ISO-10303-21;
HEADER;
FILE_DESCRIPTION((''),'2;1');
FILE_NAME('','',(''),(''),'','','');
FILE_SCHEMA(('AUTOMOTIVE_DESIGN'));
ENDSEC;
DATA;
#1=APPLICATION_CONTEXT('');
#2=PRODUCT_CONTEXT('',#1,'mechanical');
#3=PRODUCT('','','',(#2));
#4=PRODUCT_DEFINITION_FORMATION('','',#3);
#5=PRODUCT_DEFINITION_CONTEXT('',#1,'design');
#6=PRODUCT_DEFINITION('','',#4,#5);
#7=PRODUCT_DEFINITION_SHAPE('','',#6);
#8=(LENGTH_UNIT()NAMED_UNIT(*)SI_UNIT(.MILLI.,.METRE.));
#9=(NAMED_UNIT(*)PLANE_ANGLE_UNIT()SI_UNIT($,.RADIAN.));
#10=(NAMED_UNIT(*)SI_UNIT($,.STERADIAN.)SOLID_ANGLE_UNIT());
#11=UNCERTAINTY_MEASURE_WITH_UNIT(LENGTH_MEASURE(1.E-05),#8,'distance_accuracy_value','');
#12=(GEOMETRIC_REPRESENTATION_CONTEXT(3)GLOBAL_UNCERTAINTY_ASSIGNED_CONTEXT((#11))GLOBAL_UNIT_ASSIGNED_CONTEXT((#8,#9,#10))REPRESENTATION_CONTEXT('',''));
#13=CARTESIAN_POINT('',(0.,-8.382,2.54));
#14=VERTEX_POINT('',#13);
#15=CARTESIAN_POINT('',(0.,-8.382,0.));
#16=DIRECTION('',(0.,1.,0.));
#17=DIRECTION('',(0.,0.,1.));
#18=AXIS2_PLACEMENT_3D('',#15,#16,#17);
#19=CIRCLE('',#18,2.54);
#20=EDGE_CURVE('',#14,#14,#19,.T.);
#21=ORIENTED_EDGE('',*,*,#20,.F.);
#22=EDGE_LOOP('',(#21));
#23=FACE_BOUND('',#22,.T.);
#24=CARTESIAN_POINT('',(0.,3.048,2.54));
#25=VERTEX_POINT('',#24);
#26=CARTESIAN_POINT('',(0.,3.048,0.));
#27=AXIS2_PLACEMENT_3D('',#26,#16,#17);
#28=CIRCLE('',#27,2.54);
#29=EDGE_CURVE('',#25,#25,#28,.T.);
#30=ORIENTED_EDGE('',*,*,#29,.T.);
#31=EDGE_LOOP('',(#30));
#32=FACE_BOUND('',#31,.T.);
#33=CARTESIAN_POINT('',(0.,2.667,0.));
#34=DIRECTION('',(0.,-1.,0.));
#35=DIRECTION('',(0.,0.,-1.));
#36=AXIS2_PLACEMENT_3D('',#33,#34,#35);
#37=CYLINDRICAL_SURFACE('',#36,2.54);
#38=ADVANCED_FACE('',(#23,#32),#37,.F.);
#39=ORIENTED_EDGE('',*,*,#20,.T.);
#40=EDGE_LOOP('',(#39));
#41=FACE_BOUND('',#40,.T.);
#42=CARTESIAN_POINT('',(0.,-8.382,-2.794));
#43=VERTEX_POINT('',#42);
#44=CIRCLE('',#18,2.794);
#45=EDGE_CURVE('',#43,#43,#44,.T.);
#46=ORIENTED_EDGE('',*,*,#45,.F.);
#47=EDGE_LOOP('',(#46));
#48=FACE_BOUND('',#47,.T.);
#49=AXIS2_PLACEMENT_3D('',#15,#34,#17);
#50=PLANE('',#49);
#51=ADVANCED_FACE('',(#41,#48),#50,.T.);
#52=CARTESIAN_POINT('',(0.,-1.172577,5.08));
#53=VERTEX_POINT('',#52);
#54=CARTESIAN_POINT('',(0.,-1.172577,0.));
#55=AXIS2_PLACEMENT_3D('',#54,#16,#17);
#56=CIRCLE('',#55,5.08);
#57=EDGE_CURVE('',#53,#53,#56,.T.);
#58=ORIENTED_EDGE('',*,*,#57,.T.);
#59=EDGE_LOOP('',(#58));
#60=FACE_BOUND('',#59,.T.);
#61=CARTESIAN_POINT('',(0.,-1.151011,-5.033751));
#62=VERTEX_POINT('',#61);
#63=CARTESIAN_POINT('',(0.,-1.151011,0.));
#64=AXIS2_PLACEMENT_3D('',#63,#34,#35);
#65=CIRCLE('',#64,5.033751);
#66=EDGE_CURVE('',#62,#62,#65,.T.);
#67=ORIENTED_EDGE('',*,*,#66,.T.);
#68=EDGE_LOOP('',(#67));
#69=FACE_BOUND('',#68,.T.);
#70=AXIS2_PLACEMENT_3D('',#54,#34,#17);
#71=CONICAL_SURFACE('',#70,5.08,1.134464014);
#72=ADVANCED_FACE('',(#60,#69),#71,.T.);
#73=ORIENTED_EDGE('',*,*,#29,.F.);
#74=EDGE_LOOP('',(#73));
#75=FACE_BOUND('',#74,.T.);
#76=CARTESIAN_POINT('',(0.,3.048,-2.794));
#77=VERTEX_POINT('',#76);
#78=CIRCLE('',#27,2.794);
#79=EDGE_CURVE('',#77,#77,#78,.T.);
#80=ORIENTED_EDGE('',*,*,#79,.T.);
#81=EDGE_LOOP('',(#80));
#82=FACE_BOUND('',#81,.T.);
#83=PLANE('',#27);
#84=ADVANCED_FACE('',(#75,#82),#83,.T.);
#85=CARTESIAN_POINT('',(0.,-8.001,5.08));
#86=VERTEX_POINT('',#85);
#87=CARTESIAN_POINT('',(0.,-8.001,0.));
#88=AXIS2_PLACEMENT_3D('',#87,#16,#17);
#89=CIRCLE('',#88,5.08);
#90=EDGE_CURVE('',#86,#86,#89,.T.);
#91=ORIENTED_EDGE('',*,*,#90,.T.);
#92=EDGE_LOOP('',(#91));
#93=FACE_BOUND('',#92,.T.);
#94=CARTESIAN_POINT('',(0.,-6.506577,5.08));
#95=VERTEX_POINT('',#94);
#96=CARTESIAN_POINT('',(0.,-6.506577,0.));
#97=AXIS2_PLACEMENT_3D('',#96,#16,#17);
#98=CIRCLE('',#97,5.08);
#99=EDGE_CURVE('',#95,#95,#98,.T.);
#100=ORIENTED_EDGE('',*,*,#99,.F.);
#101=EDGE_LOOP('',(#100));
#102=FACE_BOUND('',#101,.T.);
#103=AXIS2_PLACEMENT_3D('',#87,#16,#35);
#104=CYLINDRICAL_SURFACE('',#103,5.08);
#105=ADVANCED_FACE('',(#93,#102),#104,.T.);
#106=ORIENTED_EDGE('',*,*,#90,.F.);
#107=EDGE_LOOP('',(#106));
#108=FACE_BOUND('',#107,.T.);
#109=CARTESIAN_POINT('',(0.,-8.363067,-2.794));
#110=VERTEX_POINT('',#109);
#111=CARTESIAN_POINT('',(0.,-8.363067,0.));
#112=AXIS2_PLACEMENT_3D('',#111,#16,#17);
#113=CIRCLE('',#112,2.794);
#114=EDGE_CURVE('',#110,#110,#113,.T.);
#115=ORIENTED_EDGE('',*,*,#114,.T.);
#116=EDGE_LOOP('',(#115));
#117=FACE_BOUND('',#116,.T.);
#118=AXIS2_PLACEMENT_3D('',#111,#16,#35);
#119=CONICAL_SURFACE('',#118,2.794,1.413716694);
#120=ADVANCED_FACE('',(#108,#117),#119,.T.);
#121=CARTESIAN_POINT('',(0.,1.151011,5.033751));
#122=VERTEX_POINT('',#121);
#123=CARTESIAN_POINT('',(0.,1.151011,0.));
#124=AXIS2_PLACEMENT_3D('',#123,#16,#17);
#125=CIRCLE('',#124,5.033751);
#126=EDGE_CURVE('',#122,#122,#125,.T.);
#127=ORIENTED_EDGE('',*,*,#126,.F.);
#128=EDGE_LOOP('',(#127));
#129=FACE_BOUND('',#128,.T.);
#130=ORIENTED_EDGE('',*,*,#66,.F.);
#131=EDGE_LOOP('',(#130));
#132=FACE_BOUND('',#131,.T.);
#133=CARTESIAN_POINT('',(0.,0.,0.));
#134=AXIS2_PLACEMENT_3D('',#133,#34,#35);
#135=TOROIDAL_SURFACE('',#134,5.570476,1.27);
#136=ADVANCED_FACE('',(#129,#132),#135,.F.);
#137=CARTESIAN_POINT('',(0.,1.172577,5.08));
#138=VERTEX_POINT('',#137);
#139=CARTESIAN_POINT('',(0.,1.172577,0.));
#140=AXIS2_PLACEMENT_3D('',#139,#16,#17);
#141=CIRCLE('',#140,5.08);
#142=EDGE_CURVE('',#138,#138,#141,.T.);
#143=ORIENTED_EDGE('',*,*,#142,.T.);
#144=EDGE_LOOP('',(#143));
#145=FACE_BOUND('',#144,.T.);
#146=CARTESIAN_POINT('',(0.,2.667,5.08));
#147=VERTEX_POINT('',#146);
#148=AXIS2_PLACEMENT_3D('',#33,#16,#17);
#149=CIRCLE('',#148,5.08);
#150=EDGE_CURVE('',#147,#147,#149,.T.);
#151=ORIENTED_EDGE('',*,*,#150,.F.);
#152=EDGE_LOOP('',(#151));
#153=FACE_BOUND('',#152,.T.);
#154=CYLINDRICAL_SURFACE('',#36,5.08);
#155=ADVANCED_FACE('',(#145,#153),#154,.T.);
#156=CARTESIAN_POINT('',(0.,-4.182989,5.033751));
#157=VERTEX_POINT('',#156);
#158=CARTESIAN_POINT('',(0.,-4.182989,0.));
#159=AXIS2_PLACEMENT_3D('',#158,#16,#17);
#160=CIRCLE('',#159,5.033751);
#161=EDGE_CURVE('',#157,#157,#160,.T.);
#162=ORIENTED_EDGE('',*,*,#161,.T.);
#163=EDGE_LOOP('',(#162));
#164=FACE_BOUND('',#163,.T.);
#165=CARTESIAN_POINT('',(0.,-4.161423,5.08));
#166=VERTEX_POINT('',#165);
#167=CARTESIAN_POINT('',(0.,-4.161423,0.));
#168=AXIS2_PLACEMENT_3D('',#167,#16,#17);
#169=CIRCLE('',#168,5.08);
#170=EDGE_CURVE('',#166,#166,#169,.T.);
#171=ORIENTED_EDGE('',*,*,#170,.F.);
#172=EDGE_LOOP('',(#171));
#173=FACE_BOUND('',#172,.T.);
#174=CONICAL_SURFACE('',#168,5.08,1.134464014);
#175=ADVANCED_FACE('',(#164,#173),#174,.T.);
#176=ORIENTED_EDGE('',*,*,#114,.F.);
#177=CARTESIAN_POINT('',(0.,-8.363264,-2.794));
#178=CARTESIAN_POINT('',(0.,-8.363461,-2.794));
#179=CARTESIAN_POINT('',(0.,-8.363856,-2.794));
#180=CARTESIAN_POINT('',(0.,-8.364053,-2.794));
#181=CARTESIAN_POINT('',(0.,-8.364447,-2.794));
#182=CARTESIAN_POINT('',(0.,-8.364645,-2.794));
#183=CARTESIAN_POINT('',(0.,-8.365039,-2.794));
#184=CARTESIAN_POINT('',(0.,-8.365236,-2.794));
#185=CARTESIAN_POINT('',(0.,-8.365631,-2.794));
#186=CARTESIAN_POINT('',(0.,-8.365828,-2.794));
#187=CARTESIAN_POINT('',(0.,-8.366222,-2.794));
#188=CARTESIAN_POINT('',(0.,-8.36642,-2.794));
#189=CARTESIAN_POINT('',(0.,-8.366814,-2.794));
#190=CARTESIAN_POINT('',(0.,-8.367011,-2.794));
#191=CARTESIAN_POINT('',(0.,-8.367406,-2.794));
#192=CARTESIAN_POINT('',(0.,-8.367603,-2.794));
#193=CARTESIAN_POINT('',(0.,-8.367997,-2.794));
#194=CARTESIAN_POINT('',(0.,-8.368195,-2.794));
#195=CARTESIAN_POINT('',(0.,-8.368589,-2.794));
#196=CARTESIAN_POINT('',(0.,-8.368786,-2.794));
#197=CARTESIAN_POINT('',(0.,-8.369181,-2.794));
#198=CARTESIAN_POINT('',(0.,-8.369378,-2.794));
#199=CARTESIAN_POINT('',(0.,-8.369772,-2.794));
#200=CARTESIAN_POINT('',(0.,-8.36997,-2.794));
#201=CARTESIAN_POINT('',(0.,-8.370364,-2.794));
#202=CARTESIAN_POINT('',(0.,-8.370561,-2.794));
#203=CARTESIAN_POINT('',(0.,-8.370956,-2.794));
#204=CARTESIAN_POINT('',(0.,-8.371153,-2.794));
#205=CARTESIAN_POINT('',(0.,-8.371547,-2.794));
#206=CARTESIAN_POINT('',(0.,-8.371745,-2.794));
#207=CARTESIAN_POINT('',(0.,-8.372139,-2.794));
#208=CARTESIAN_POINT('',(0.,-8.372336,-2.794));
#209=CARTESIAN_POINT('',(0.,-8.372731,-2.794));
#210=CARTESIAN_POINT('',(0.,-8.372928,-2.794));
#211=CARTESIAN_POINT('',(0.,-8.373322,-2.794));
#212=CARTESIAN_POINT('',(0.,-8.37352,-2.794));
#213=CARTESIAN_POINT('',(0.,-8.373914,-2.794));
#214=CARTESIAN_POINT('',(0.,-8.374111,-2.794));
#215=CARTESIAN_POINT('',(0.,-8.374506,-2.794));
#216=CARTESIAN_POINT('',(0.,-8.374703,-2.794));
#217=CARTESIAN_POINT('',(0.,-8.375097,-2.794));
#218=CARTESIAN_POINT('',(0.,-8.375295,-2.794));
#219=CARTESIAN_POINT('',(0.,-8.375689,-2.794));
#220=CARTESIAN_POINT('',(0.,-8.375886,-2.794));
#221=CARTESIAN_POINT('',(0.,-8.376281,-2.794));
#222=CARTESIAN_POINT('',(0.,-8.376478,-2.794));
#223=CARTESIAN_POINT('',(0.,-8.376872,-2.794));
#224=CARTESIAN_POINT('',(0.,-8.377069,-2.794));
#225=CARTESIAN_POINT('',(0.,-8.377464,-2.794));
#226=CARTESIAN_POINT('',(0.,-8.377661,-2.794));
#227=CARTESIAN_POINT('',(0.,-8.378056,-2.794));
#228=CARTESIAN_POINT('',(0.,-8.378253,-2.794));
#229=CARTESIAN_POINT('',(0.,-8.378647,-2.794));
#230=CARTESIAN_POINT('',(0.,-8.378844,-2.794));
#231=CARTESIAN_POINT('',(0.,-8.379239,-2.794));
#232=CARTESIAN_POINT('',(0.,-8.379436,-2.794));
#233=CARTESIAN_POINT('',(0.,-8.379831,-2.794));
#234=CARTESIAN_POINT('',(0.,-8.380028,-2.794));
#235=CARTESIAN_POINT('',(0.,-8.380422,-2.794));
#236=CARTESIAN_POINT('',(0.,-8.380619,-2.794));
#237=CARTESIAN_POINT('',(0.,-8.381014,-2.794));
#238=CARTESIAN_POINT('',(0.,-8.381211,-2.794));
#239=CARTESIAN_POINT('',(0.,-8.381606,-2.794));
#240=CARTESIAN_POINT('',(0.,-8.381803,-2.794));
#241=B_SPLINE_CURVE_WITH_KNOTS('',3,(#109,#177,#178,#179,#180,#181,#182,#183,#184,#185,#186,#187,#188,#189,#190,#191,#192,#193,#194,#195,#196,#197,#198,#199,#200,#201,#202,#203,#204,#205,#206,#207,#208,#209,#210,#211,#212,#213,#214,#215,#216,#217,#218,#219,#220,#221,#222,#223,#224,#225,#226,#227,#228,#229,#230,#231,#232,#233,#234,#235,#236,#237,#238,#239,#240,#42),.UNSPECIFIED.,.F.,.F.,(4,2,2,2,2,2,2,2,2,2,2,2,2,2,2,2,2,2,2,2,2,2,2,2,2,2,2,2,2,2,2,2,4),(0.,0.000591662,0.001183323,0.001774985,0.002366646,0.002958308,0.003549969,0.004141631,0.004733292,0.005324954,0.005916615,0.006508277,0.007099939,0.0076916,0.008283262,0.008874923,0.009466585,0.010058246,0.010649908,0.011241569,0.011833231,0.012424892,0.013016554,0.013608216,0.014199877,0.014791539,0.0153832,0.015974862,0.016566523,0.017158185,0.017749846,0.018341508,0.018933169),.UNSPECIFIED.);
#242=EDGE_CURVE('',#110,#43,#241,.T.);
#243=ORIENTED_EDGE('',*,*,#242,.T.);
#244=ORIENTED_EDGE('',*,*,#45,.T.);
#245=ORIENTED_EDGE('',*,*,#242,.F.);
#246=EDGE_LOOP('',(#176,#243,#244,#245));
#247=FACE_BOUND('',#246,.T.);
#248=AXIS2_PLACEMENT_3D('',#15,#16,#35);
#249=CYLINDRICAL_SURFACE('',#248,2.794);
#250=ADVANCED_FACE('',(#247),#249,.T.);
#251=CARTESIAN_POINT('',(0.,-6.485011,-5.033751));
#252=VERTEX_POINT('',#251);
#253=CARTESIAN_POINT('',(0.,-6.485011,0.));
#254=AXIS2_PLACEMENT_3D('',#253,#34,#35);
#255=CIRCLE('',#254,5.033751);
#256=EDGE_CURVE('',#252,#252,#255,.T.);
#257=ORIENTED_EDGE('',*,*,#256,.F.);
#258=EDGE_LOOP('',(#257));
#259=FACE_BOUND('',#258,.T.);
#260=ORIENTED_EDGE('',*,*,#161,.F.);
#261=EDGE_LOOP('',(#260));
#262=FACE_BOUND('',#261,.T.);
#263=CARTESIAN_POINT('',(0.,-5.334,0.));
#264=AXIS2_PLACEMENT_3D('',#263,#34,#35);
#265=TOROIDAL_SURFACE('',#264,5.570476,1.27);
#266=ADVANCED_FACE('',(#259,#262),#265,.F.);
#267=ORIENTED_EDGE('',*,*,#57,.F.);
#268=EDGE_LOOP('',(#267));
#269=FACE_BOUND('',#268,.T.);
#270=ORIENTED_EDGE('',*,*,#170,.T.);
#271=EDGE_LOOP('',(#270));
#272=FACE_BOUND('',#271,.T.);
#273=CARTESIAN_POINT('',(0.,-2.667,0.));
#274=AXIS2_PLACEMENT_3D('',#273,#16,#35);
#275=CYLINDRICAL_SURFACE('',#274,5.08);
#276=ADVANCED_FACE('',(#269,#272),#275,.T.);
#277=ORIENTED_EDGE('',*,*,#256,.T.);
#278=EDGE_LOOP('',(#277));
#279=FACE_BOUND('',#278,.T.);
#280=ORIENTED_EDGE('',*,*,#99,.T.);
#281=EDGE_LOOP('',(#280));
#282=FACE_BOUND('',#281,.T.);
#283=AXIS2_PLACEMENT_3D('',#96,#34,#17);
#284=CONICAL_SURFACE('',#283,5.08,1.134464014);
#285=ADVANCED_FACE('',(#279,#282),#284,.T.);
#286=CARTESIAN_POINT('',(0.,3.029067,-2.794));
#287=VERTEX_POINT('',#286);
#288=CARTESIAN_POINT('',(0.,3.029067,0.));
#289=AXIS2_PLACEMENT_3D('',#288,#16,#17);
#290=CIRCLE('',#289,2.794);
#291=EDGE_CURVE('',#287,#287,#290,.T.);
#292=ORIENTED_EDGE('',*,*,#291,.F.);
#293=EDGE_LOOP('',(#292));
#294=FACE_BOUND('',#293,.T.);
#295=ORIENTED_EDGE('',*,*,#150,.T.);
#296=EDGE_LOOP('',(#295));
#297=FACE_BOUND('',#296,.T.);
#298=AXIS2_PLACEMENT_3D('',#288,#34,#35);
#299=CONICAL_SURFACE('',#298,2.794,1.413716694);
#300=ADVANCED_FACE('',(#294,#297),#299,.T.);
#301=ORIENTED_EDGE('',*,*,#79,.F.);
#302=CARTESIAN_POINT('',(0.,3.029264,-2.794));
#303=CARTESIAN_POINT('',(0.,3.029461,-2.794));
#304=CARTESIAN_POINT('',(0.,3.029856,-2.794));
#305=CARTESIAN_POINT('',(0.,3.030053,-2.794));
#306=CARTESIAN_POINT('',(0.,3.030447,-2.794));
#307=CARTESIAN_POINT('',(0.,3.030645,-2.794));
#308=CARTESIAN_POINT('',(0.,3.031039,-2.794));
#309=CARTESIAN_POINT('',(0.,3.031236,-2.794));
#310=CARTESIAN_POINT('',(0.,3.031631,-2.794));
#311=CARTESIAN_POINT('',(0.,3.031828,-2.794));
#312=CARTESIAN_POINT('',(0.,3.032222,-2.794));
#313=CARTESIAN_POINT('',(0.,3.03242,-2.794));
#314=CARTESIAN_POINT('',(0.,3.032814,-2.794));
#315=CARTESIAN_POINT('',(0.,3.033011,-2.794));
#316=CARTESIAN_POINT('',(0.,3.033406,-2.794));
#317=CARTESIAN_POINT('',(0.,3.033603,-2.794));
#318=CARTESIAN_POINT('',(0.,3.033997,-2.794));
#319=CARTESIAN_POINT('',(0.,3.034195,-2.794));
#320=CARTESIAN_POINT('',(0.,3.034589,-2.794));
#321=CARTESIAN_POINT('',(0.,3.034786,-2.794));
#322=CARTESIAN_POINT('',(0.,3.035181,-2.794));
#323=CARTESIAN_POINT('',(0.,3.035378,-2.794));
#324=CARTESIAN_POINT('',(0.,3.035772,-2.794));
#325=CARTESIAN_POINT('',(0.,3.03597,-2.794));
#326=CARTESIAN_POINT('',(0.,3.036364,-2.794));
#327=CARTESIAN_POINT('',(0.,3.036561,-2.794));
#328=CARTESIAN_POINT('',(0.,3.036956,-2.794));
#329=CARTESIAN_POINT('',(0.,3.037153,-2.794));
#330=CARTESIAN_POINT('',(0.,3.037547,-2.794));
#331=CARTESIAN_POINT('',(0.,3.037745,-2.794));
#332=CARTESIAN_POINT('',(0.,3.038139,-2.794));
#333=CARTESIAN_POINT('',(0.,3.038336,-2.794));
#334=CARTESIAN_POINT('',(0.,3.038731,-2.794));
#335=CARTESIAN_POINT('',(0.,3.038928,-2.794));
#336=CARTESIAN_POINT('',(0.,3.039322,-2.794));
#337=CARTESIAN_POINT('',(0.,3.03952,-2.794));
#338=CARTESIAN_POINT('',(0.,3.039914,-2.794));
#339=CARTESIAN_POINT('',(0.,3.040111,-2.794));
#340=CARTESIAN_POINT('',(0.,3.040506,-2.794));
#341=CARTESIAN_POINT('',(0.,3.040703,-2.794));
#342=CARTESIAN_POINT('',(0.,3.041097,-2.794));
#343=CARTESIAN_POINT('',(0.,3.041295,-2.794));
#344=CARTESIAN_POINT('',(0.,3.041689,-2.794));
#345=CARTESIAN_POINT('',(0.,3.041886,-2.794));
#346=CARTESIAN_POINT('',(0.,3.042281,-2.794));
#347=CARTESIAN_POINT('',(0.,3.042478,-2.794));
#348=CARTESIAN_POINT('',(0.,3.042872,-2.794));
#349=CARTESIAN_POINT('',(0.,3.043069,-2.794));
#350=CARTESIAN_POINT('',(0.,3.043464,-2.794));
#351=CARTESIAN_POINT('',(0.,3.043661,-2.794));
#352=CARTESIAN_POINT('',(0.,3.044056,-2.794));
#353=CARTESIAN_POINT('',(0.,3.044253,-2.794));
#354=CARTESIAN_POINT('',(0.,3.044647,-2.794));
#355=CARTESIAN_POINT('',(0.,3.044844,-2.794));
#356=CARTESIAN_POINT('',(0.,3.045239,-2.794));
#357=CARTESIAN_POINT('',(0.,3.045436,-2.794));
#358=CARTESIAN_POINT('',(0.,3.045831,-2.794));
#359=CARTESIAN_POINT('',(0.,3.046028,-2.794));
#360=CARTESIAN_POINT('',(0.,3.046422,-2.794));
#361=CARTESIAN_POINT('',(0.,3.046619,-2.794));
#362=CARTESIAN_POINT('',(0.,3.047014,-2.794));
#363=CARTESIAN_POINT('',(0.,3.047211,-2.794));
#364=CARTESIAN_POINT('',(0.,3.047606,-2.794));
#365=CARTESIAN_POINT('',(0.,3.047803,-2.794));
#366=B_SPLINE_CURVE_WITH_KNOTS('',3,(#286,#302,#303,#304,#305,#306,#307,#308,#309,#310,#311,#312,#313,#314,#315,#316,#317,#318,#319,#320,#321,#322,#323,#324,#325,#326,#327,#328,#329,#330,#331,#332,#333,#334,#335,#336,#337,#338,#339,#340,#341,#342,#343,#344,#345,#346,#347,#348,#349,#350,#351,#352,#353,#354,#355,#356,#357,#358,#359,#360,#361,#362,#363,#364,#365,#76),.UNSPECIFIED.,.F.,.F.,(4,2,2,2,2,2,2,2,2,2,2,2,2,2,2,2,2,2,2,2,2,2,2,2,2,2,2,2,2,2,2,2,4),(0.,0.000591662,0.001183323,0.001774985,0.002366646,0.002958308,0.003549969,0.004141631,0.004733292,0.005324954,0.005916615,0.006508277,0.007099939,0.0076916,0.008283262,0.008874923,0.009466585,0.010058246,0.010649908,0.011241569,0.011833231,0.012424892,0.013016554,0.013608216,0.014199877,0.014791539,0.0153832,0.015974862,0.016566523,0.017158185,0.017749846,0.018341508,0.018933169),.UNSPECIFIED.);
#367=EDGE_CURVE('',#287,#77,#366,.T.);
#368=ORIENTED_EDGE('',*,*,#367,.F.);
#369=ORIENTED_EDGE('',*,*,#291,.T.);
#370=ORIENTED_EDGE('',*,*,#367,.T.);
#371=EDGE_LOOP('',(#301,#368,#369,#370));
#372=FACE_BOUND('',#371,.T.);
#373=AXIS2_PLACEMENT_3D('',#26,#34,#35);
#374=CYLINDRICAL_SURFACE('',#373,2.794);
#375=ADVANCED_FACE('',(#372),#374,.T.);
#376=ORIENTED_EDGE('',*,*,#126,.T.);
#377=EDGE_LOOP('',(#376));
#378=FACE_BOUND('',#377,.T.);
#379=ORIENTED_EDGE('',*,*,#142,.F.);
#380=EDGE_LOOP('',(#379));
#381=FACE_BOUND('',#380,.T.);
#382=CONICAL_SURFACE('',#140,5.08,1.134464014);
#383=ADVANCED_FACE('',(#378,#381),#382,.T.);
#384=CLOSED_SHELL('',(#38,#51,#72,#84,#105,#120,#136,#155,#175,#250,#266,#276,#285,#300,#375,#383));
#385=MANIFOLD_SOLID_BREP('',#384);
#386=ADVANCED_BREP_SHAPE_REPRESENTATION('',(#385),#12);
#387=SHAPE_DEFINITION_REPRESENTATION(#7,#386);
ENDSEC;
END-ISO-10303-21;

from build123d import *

# Parameters (mm, degrees)
SKETCH1_R           = 5.08
SKETCH1_R_2         = 2.54
BOSS_EXTRUDE1_DEPTH = 2.667
CHAMFER3_SIZE       = 2.5146
CHAMFER3_SIZE2      = 1.172577237
SKETCH3_R           = 2.794
SKETCH3_R_2         = 2.54
BOSS_EXTRUDE2_DEPTH = 0.381
CHAMFER1_SIZE       = 2.286
CHAMFER1_SIZE_2     = 0.362066831
FILLET4_R           = 1.27


with BuildPart() as part:
    # Sketch1 → Boss-Extrude1 (new body)
    with BuildSketch(Plane(origin=(0, 0, 0), x_dir=(1, 0, 0), z_dir=(0, 1, 0))):
        with Locations(Location((0, 0, 0), (0, 0, 270))):
            Circle(SKETCH1_R)
        with Locations(Location((0, 0, 0), (0, 0, 270))):
            Circle(SKETCH1_R_2, mode=Mode.SUBTRACT)
    extrude(amount=BOSS_EXTRUDE1_DEPTH)

    # Chamfer3
    chamfer3_edges = [part.edges().sort_by_distance(p)[0] for p in [
        (0, 0, -5.08),
    ]]
    chamfer3_side = [part.faces().sort_by_distance(p)[0] for p in [
        (0, 0, -4.936315902),
    ]]
    chamfer(chamfer3_edges, length=CHAMFER3_SIZE, length2=CHAMFER3_SIZE2, reference=chamfer3_side[0])

    # Mirror4: part across plane


with BuildPart() as part_1:
    add(part.part)
    add(part.part.mirror(Plane.ZX))

    # Sketch3 → Boss-Extrude2 (add)
    with BuildSketch(Plane(origin=(0, 2.667, 0), x_dir=(1, 0, 0), z_dir=(0, 1, 0))):
        with Locations(Location((0, 0, 0), (0, 0, 90))):
            Circle(SKETCH3_R)
        with Locations(Location((0, 0, 0), (0, 0, 270))):
            Circle(SKETCH3_R_2, mode=Mode.SUBTRACT)
    extrude(amount=BOSS_EXTRUDE2_DEPTH)

    # Chamfer1
    # the kernel refuses this chamfer: 2.286, 0.362066831 mm, written as the material it adds along each edge
    with BuildSketch(Plane(origin=(0, 2.667, 0), x_dir=(0, 0, -1), z_dir=(1, 0, 0))) as chamfer1_piece_1_section:
        Polygon((2.794 + CHAMFER1_SIZE, 0), (2.794, CHAMFER1_SIZE_2 * 0.999999998845), (2.794, 0), align=None)
    chamfer1_piece_1 = revolve(axis=Axis((0, 2.667, 0), (0, 1, 0)), mode=Mode.PRIVATE)
    chamfer1_piece_1 = chamfer1_piece_1 & Plane(origin=(0, 2.832338602, 0), x_dir=(0, 0, 1), z_dir=(0, -1, 0)) * Cylinder(5.08, 21, mode=Mode.PRIVATE)
    add(chamfer1_piece_1)

    # Mirror5: part across plane


with BuildPart() as part_2:
    add(part_1.part)
    add(part_1.part.mirror(Plane(origin=(0, -2.667, 0), x_dir=(0, 0, 1), z_dir=(0, -1, 0))))

    # Fillet4
    fillet4_edges = [part_2.edges().sort_by_distance(p)[0] for p in [
        (0, 0, -2.5654),
        (0, -5.334, -2.5654),
    ]]
    fillet(fillet4_edges, radius=FILLET4_R)


solid = part_2.part
